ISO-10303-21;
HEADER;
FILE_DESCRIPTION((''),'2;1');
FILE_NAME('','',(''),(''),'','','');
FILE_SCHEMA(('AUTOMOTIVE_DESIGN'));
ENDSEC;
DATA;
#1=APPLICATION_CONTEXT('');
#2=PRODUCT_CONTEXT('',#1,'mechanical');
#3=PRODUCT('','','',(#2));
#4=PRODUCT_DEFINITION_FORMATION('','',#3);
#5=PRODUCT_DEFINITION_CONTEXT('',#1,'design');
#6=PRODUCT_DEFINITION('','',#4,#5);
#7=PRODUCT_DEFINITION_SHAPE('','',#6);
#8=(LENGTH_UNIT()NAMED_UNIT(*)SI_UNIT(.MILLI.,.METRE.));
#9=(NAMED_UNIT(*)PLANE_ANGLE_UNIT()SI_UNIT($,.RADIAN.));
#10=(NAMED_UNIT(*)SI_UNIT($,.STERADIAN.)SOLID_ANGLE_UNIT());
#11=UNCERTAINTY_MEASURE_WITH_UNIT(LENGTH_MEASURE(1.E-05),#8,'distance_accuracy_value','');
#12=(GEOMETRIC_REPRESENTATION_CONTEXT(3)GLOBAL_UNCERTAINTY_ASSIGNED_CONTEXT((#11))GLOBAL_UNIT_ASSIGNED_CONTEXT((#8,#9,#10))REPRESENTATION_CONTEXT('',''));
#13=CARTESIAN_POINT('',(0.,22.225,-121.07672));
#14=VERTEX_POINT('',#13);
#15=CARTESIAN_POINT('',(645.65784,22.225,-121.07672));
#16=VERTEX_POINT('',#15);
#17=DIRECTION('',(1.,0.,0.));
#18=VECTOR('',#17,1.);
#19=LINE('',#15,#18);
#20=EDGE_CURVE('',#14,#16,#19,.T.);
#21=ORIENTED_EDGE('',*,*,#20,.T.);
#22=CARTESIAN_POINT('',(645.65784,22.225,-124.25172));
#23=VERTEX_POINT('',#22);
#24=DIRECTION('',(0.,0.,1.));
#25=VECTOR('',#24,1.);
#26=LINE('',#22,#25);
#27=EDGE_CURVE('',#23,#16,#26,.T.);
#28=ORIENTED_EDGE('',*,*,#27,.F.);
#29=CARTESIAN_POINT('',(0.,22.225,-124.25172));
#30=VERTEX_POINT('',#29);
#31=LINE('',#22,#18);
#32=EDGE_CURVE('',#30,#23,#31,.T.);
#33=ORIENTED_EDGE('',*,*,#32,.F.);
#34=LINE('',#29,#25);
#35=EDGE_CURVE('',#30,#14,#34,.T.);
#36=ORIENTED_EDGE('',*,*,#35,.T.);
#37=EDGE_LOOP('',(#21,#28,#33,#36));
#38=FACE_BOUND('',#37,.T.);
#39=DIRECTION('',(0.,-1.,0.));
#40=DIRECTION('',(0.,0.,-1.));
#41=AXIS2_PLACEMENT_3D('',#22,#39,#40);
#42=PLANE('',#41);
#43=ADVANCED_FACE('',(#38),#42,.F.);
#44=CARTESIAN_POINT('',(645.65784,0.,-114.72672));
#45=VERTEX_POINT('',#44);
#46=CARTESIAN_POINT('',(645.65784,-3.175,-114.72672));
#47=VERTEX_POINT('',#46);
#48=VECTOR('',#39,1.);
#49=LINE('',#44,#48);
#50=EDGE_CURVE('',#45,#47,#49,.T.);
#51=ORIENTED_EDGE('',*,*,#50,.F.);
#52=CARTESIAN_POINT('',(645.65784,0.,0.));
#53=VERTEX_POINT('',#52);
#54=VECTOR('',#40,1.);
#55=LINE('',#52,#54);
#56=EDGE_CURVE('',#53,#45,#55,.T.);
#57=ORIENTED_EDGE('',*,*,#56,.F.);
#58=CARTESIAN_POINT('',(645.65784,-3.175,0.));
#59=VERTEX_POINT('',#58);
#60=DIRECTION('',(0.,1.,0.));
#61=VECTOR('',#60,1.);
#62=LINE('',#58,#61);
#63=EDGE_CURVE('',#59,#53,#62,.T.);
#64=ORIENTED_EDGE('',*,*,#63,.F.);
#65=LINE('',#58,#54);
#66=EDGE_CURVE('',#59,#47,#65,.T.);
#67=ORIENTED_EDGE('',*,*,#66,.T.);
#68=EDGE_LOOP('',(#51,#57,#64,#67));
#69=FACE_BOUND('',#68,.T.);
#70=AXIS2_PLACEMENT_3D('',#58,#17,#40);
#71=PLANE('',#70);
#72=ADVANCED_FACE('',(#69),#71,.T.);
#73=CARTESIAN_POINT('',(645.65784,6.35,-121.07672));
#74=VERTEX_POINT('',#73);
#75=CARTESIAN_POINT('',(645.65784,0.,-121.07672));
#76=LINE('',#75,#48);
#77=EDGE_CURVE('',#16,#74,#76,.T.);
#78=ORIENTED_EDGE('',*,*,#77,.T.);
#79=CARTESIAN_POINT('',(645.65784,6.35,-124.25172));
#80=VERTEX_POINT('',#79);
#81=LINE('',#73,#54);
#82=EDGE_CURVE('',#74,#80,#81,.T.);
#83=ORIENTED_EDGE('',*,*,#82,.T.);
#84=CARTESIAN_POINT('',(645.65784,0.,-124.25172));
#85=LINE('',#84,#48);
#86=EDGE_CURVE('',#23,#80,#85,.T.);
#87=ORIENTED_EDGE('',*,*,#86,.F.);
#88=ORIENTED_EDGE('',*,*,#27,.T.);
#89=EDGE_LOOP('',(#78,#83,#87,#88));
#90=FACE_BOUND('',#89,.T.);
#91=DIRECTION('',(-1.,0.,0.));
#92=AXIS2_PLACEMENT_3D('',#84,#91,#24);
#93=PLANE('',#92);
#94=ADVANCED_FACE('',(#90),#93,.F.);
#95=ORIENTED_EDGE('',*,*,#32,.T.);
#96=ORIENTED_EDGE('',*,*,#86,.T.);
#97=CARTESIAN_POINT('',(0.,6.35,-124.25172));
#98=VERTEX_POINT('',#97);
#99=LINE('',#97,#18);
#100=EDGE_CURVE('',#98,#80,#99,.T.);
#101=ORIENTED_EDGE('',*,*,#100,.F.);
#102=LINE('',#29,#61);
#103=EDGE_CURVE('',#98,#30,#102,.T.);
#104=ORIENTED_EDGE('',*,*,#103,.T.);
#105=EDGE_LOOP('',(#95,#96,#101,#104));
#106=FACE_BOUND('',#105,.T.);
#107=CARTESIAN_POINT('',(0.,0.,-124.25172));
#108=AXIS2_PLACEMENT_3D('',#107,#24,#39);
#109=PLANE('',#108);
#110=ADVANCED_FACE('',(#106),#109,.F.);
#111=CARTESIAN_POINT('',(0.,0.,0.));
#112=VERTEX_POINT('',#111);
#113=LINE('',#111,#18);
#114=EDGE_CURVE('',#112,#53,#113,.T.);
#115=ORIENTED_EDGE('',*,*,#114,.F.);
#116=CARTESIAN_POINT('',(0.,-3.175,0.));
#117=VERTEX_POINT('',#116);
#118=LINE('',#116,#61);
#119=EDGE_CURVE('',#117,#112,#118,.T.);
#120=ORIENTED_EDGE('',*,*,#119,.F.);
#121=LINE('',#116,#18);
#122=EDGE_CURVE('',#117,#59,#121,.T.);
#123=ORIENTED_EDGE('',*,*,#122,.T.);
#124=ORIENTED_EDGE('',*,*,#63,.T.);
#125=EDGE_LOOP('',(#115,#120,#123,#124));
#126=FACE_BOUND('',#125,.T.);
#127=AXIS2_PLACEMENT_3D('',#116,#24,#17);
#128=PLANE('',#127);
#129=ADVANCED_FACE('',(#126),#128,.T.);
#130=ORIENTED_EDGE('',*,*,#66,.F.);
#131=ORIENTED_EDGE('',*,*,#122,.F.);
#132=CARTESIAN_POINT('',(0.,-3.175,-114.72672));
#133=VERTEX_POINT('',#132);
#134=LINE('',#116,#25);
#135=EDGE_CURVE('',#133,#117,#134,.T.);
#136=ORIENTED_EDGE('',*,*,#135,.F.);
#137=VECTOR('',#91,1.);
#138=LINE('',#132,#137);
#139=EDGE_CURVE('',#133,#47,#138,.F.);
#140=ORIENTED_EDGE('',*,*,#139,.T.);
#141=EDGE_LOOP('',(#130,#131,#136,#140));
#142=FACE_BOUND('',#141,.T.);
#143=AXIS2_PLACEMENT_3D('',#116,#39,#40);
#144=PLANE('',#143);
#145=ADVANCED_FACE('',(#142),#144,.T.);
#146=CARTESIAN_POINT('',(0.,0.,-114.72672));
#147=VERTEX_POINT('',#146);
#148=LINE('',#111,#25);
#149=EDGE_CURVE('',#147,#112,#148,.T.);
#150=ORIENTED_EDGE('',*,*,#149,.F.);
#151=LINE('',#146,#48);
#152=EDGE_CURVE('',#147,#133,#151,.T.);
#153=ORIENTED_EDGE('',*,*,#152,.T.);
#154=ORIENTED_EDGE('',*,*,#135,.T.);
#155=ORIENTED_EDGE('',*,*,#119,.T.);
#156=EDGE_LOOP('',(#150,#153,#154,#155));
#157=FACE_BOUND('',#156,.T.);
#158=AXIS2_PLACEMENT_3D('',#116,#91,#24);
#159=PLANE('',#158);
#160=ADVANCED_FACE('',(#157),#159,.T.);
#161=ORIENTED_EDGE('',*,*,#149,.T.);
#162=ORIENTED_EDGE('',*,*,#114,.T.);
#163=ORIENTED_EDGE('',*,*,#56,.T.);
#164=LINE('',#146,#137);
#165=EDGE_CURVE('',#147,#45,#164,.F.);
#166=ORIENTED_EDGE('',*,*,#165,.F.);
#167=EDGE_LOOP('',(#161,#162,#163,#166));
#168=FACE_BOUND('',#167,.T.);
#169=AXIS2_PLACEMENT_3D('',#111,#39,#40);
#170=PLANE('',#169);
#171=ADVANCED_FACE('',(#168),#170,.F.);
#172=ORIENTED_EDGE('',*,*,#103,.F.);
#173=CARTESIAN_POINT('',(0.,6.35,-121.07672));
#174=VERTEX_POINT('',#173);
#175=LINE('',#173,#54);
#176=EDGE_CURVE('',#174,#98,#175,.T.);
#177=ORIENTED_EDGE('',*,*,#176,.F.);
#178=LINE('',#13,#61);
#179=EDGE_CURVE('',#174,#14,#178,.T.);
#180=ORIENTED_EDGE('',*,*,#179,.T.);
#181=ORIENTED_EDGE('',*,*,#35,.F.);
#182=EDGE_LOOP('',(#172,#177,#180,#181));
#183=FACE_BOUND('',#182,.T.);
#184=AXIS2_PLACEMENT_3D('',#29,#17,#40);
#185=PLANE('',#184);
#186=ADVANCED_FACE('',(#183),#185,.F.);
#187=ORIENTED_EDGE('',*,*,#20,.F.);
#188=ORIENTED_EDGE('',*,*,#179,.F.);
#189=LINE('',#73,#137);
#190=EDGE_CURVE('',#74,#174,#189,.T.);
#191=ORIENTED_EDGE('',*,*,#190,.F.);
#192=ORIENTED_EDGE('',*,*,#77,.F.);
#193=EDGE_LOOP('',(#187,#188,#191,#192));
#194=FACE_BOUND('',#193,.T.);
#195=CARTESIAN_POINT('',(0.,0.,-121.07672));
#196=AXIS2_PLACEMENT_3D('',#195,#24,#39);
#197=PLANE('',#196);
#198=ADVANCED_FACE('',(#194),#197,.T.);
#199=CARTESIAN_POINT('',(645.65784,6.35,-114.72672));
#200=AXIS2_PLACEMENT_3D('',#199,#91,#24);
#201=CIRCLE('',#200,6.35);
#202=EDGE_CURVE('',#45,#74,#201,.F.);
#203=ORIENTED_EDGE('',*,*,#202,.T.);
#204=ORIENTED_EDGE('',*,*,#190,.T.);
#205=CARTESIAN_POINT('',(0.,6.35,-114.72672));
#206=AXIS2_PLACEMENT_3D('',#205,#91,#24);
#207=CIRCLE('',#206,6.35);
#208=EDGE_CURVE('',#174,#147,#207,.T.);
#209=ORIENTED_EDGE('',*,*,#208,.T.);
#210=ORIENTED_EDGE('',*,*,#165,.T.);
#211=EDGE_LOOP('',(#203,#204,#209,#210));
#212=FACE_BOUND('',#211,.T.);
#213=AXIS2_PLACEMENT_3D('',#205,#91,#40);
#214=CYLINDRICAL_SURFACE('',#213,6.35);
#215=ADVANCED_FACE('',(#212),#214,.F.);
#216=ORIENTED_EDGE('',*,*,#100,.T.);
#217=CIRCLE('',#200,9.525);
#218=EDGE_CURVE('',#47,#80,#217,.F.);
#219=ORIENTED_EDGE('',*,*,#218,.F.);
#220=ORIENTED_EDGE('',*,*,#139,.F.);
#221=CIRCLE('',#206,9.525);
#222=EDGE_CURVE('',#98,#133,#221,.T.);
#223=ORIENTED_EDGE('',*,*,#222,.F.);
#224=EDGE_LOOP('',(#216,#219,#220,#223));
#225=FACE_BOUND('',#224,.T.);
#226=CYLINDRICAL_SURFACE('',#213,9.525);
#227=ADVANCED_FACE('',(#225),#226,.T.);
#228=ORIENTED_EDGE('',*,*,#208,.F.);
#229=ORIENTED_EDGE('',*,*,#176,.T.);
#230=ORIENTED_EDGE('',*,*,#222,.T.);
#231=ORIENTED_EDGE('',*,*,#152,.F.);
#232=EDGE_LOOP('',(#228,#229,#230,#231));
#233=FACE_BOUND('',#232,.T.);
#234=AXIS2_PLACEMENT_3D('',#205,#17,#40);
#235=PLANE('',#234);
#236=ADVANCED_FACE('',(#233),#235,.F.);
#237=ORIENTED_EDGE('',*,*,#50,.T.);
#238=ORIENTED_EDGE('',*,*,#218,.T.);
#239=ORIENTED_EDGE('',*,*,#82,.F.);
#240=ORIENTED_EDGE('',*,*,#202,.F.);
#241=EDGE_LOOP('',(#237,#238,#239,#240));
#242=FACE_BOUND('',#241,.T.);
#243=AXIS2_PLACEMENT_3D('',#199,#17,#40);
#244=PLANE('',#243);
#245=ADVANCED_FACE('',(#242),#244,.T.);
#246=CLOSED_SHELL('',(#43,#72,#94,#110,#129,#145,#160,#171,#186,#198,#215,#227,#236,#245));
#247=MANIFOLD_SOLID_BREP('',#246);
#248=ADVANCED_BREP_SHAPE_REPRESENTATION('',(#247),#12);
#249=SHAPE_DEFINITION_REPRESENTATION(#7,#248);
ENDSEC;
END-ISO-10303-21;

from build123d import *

# Parameters (mm, degrees)
SKETCH1_W                    = 645.65784
SKETCH1_H                    = 121.07672
BASE_FLANGE1_DEPTH           = 3.175
EDGE_FLANGE1_STRIP_W         = 25.4
EDGE_FLANGE1_STRIP_H         = 3.175
EDGE_FLANGE1_STRIP_CUT_DEPTH = 645.65784
EDGE_FLANGE1_DEPTH           = 645.65784


# Sheet-metal steps are written as plain solids
with BuildPart() as part:
    # Sketch1 → Base-Flange1 (new body)
    with BuildSketch(Plane(origin=(0, 0, 0), x_dir=(1, 0, 0), z_dir=(0, 1, 0))):
        with Locations((322.82892, 60.53836)):
            Rectangle(SKETCH1_W, SKETCH1_H)
    extrude(amount=-BASE_FLANGE1_DEPTH)

    # Edge-Flange1 strip (across the edge) → Edge-Flange1 strip cut (cut)
    with BuildSketch(Plane(origin=(645.65784, 0, -121.07672), x_dir=(0, 0, 1), z_dir=(-1, 0, 0))):
        with Locations((-6.35, -1.5875)):
            Rectangle(EDGE_FLANGE1_STRIP_W, EDGE_FLANGE1_STRIP_H)
    extrude(amount=EDGE_FLANGE1_STRIP_CUT_DEPTH, mode=Mode.SUBTRACT)

    # Edge-Flange1 section (across the edge) → Edge-Flange1 (add)
    with BuildSketch(Plane(origin=(645.65784, 0, -121.07672), x_dir=(0, 0, 1), z_dir=(-1, 0, 0))):
        with BuildLine():
            Line((-3.175, 6.35), (-3.175, 22.225))
            Line((-3.175, 22.225), (0, 22.225))
            Line((0, 22.225), (0, 6.35))
            ThreePointArc((0, 6.35), (1.859871939, 1.859871939), (6.35, 0))
            Line((6.35, 0), (6.35, -3.175))
            ThreePointArc((6.35, -3.175), (-0.385192091, -0.385192091), (-3.175, 6.35))
        make_face()
    extrude(amount=EDGE_FLANGE1_DEPTH)


solid = part.part
